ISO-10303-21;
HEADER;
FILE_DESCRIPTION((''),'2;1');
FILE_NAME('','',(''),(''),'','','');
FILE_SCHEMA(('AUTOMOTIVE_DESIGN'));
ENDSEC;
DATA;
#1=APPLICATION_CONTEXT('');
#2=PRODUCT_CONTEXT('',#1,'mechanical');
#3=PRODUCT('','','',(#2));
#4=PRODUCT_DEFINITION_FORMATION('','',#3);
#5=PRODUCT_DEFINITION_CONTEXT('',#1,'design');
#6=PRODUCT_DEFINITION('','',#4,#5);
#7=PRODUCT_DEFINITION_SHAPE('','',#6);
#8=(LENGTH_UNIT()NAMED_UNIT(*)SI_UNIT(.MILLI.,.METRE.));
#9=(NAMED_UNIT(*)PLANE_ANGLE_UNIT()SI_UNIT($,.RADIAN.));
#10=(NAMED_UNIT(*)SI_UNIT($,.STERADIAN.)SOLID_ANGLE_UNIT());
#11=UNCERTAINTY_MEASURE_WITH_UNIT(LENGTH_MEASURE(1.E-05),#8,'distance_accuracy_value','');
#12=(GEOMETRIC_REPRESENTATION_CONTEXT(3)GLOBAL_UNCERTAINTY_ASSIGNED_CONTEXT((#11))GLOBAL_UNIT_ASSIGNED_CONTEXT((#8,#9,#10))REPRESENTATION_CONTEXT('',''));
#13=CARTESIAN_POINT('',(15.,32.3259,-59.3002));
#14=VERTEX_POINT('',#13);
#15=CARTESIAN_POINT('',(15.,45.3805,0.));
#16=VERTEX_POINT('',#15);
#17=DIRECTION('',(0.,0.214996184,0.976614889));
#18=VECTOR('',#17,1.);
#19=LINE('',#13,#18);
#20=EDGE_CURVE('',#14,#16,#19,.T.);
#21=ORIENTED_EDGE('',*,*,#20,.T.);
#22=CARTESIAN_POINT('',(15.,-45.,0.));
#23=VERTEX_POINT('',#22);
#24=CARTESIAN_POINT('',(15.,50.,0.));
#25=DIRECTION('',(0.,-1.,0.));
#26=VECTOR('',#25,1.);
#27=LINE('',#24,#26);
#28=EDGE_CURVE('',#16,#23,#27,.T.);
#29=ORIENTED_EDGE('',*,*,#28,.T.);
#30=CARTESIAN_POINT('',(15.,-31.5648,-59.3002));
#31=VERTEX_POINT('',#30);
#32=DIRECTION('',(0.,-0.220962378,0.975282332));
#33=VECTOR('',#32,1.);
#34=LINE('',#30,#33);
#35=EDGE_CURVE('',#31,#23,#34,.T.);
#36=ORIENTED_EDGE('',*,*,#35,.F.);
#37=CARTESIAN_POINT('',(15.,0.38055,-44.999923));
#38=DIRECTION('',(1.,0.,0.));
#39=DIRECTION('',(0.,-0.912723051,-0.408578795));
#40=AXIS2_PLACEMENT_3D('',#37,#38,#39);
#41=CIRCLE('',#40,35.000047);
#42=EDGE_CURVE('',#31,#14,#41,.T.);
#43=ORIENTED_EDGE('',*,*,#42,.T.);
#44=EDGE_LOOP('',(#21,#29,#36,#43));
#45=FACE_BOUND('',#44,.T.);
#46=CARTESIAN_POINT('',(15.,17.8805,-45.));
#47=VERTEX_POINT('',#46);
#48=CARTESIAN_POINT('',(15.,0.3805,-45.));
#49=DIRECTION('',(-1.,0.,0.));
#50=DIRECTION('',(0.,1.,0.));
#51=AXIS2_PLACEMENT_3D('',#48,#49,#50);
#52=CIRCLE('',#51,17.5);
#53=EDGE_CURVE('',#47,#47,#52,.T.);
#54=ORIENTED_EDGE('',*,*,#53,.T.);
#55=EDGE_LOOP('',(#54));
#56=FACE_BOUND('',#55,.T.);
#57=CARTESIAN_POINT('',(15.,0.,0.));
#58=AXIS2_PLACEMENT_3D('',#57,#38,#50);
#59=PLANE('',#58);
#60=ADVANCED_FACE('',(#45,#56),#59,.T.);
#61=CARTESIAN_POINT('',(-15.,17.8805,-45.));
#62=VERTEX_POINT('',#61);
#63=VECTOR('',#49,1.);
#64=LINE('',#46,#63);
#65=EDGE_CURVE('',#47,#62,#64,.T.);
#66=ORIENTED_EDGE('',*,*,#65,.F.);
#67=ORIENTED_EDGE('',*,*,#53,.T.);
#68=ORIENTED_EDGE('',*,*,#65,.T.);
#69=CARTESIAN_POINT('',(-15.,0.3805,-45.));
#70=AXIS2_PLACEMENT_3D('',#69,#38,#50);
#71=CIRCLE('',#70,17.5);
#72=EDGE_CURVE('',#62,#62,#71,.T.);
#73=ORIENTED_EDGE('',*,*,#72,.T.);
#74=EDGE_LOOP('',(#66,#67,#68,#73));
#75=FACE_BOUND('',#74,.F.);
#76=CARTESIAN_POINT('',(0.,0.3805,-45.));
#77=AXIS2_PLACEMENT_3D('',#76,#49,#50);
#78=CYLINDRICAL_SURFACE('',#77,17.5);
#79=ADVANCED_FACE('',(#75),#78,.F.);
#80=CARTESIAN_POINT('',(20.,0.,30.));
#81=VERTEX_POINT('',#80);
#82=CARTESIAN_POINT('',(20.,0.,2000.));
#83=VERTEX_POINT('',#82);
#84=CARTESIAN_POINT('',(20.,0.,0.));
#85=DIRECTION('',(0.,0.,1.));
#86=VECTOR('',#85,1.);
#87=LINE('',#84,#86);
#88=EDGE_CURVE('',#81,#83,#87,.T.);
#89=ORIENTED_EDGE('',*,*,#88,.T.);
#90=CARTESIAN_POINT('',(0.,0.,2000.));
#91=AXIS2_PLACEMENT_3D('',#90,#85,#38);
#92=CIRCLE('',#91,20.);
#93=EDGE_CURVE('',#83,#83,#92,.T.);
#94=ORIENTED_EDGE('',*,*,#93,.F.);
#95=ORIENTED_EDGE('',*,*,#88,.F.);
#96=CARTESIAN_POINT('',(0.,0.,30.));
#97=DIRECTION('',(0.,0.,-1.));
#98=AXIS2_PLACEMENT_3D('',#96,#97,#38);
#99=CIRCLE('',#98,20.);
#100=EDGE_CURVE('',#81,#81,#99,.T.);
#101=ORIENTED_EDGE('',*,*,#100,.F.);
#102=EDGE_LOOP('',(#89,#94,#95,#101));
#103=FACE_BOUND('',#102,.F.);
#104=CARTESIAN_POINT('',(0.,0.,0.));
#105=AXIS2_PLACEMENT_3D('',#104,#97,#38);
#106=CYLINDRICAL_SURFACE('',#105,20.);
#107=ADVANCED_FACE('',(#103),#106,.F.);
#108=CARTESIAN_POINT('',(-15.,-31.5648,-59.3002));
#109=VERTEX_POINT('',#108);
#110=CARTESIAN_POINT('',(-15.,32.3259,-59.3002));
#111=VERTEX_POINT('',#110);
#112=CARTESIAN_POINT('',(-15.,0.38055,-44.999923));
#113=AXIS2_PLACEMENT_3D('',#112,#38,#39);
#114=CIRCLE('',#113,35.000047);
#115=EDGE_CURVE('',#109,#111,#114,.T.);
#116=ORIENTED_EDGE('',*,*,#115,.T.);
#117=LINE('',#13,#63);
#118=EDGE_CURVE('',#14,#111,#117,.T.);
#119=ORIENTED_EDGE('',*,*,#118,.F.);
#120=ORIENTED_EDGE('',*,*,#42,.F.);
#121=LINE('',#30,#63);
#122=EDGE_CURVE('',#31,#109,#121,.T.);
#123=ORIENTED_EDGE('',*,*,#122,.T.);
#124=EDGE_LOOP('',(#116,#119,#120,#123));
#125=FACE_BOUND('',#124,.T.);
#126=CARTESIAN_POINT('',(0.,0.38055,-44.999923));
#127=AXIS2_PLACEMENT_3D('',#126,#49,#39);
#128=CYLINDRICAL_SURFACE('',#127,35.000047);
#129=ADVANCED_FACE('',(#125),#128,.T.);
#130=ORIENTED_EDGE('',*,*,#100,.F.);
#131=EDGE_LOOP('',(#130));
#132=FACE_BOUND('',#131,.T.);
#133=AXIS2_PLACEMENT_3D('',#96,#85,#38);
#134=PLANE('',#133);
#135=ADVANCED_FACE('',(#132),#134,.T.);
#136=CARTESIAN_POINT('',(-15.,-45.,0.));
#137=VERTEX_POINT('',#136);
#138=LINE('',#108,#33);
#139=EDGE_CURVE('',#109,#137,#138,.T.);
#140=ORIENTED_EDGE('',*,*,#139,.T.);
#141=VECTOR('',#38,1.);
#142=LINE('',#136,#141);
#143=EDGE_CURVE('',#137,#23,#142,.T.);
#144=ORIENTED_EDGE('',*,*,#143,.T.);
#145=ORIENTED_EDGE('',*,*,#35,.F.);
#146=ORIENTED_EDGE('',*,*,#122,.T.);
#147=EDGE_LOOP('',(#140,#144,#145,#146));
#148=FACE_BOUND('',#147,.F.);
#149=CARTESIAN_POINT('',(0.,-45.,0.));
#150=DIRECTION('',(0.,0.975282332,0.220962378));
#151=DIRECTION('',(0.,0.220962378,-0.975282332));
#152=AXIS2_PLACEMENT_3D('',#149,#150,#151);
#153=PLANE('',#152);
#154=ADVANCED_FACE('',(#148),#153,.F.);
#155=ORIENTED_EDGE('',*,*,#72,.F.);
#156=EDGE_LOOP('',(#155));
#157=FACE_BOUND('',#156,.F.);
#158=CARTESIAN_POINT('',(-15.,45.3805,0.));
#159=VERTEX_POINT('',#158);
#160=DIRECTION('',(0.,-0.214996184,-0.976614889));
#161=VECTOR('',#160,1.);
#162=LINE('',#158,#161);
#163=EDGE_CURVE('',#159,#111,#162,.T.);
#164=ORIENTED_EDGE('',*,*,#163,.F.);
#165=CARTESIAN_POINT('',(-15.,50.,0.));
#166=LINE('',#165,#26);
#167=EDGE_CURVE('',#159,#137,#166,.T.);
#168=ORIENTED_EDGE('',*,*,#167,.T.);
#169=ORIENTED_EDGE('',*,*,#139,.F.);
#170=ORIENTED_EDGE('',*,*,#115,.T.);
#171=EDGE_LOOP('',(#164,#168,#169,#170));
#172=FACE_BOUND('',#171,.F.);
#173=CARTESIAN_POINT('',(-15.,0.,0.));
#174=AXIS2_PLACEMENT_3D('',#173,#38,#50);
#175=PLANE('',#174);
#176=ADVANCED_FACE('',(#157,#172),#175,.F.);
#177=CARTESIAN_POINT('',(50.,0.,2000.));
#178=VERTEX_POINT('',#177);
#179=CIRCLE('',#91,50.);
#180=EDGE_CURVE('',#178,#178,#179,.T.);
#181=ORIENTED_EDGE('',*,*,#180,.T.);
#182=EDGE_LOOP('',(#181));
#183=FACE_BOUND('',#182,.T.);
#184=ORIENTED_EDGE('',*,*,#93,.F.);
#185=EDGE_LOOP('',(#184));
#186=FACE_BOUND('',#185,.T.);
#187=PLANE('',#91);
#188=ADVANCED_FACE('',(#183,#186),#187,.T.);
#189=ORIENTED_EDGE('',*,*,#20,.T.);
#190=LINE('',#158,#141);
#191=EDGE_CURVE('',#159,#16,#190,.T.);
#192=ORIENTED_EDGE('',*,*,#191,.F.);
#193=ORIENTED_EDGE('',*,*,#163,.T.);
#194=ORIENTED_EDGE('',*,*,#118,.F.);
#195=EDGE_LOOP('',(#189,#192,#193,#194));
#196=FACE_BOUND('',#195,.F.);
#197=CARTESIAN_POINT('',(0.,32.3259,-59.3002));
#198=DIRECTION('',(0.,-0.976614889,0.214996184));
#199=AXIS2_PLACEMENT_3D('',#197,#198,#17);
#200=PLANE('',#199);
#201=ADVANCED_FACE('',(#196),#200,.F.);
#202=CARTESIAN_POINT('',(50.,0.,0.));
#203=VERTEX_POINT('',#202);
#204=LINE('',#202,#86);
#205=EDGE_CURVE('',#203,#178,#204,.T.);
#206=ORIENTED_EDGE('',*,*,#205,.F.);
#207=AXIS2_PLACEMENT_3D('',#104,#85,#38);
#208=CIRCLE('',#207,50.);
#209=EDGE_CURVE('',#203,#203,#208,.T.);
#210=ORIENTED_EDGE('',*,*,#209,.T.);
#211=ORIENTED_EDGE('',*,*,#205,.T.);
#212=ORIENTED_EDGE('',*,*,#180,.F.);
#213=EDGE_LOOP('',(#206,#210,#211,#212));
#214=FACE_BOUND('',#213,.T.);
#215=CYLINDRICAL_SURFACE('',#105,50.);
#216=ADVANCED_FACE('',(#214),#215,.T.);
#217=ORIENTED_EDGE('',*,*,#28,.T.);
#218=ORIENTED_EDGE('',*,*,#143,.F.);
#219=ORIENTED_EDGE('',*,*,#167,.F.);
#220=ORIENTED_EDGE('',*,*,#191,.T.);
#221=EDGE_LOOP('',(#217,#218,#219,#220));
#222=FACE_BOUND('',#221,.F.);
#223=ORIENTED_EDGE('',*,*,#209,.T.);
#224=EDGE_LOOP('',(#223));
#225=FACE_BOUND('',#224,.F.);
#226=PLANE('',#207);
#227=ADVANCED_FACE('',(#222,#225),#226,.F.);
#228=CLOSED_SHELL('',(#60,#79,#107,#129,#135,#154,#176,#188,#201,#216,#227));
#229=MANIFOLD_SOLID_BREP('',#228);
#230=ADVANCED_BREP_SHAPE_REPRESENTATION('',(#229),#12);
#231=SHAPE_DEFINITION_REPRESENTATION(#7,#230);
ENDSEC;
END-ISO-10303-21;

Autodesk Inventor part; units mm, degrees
ref_plane "YZ Plane" through (0, 0, 0) normal (1, 0, 0) x (0, 1, 0)
ref_plane "XZ Plane" through (0, 0, 0) normal (0, 1, 0) x (-1, 0, 0)
ref_plane "XY Plane" through (0, 0, 0) normal (0, 0, 1) x (1, 0, 0)
sketch "Sketch1" plane through (0, 0, 0) normal (0, 0, 1) x (1, 0, 0)
  circle A0 centre (0, 0) radius 50
  dimension "d0" = 100
extrude "Extrusion1" add sketch "Sketch1" along normal blind 2000
sketch "Sketch2" plane through (0, 0, 0) normal (1, 0, 0) x (0, 1, 0)
  line L0 (50, 0) -> (-50, 0) projected
  arc A0 (-31.5648, -59.3002) -> (32.3259, -59.3002) centre (0.3805, -45) ccw
  line L1 (32.3259, -59.3002) -> (45.3805, 0)
  circle A1 centre (0.3805, -45) radius 17.5
  line L2 (-45, 0) -> (-31.5648, -59.3002)
  point P0 (0, 0)
  point P1 (0, 0)
  dimension "d3" = 35
  dimension "d4" = 35
  dimension "d5" = 45
  dimension "d6" = 45
  dimension "d7" = 45
extrude "Extrusion2" add sketch "Sketch2" along normal mid plane 30
shell "Shell1" thickness 30 removed faces 1 at (9.39, -8.8667, 2000)
properties part number "Parth_Cylinder2"
